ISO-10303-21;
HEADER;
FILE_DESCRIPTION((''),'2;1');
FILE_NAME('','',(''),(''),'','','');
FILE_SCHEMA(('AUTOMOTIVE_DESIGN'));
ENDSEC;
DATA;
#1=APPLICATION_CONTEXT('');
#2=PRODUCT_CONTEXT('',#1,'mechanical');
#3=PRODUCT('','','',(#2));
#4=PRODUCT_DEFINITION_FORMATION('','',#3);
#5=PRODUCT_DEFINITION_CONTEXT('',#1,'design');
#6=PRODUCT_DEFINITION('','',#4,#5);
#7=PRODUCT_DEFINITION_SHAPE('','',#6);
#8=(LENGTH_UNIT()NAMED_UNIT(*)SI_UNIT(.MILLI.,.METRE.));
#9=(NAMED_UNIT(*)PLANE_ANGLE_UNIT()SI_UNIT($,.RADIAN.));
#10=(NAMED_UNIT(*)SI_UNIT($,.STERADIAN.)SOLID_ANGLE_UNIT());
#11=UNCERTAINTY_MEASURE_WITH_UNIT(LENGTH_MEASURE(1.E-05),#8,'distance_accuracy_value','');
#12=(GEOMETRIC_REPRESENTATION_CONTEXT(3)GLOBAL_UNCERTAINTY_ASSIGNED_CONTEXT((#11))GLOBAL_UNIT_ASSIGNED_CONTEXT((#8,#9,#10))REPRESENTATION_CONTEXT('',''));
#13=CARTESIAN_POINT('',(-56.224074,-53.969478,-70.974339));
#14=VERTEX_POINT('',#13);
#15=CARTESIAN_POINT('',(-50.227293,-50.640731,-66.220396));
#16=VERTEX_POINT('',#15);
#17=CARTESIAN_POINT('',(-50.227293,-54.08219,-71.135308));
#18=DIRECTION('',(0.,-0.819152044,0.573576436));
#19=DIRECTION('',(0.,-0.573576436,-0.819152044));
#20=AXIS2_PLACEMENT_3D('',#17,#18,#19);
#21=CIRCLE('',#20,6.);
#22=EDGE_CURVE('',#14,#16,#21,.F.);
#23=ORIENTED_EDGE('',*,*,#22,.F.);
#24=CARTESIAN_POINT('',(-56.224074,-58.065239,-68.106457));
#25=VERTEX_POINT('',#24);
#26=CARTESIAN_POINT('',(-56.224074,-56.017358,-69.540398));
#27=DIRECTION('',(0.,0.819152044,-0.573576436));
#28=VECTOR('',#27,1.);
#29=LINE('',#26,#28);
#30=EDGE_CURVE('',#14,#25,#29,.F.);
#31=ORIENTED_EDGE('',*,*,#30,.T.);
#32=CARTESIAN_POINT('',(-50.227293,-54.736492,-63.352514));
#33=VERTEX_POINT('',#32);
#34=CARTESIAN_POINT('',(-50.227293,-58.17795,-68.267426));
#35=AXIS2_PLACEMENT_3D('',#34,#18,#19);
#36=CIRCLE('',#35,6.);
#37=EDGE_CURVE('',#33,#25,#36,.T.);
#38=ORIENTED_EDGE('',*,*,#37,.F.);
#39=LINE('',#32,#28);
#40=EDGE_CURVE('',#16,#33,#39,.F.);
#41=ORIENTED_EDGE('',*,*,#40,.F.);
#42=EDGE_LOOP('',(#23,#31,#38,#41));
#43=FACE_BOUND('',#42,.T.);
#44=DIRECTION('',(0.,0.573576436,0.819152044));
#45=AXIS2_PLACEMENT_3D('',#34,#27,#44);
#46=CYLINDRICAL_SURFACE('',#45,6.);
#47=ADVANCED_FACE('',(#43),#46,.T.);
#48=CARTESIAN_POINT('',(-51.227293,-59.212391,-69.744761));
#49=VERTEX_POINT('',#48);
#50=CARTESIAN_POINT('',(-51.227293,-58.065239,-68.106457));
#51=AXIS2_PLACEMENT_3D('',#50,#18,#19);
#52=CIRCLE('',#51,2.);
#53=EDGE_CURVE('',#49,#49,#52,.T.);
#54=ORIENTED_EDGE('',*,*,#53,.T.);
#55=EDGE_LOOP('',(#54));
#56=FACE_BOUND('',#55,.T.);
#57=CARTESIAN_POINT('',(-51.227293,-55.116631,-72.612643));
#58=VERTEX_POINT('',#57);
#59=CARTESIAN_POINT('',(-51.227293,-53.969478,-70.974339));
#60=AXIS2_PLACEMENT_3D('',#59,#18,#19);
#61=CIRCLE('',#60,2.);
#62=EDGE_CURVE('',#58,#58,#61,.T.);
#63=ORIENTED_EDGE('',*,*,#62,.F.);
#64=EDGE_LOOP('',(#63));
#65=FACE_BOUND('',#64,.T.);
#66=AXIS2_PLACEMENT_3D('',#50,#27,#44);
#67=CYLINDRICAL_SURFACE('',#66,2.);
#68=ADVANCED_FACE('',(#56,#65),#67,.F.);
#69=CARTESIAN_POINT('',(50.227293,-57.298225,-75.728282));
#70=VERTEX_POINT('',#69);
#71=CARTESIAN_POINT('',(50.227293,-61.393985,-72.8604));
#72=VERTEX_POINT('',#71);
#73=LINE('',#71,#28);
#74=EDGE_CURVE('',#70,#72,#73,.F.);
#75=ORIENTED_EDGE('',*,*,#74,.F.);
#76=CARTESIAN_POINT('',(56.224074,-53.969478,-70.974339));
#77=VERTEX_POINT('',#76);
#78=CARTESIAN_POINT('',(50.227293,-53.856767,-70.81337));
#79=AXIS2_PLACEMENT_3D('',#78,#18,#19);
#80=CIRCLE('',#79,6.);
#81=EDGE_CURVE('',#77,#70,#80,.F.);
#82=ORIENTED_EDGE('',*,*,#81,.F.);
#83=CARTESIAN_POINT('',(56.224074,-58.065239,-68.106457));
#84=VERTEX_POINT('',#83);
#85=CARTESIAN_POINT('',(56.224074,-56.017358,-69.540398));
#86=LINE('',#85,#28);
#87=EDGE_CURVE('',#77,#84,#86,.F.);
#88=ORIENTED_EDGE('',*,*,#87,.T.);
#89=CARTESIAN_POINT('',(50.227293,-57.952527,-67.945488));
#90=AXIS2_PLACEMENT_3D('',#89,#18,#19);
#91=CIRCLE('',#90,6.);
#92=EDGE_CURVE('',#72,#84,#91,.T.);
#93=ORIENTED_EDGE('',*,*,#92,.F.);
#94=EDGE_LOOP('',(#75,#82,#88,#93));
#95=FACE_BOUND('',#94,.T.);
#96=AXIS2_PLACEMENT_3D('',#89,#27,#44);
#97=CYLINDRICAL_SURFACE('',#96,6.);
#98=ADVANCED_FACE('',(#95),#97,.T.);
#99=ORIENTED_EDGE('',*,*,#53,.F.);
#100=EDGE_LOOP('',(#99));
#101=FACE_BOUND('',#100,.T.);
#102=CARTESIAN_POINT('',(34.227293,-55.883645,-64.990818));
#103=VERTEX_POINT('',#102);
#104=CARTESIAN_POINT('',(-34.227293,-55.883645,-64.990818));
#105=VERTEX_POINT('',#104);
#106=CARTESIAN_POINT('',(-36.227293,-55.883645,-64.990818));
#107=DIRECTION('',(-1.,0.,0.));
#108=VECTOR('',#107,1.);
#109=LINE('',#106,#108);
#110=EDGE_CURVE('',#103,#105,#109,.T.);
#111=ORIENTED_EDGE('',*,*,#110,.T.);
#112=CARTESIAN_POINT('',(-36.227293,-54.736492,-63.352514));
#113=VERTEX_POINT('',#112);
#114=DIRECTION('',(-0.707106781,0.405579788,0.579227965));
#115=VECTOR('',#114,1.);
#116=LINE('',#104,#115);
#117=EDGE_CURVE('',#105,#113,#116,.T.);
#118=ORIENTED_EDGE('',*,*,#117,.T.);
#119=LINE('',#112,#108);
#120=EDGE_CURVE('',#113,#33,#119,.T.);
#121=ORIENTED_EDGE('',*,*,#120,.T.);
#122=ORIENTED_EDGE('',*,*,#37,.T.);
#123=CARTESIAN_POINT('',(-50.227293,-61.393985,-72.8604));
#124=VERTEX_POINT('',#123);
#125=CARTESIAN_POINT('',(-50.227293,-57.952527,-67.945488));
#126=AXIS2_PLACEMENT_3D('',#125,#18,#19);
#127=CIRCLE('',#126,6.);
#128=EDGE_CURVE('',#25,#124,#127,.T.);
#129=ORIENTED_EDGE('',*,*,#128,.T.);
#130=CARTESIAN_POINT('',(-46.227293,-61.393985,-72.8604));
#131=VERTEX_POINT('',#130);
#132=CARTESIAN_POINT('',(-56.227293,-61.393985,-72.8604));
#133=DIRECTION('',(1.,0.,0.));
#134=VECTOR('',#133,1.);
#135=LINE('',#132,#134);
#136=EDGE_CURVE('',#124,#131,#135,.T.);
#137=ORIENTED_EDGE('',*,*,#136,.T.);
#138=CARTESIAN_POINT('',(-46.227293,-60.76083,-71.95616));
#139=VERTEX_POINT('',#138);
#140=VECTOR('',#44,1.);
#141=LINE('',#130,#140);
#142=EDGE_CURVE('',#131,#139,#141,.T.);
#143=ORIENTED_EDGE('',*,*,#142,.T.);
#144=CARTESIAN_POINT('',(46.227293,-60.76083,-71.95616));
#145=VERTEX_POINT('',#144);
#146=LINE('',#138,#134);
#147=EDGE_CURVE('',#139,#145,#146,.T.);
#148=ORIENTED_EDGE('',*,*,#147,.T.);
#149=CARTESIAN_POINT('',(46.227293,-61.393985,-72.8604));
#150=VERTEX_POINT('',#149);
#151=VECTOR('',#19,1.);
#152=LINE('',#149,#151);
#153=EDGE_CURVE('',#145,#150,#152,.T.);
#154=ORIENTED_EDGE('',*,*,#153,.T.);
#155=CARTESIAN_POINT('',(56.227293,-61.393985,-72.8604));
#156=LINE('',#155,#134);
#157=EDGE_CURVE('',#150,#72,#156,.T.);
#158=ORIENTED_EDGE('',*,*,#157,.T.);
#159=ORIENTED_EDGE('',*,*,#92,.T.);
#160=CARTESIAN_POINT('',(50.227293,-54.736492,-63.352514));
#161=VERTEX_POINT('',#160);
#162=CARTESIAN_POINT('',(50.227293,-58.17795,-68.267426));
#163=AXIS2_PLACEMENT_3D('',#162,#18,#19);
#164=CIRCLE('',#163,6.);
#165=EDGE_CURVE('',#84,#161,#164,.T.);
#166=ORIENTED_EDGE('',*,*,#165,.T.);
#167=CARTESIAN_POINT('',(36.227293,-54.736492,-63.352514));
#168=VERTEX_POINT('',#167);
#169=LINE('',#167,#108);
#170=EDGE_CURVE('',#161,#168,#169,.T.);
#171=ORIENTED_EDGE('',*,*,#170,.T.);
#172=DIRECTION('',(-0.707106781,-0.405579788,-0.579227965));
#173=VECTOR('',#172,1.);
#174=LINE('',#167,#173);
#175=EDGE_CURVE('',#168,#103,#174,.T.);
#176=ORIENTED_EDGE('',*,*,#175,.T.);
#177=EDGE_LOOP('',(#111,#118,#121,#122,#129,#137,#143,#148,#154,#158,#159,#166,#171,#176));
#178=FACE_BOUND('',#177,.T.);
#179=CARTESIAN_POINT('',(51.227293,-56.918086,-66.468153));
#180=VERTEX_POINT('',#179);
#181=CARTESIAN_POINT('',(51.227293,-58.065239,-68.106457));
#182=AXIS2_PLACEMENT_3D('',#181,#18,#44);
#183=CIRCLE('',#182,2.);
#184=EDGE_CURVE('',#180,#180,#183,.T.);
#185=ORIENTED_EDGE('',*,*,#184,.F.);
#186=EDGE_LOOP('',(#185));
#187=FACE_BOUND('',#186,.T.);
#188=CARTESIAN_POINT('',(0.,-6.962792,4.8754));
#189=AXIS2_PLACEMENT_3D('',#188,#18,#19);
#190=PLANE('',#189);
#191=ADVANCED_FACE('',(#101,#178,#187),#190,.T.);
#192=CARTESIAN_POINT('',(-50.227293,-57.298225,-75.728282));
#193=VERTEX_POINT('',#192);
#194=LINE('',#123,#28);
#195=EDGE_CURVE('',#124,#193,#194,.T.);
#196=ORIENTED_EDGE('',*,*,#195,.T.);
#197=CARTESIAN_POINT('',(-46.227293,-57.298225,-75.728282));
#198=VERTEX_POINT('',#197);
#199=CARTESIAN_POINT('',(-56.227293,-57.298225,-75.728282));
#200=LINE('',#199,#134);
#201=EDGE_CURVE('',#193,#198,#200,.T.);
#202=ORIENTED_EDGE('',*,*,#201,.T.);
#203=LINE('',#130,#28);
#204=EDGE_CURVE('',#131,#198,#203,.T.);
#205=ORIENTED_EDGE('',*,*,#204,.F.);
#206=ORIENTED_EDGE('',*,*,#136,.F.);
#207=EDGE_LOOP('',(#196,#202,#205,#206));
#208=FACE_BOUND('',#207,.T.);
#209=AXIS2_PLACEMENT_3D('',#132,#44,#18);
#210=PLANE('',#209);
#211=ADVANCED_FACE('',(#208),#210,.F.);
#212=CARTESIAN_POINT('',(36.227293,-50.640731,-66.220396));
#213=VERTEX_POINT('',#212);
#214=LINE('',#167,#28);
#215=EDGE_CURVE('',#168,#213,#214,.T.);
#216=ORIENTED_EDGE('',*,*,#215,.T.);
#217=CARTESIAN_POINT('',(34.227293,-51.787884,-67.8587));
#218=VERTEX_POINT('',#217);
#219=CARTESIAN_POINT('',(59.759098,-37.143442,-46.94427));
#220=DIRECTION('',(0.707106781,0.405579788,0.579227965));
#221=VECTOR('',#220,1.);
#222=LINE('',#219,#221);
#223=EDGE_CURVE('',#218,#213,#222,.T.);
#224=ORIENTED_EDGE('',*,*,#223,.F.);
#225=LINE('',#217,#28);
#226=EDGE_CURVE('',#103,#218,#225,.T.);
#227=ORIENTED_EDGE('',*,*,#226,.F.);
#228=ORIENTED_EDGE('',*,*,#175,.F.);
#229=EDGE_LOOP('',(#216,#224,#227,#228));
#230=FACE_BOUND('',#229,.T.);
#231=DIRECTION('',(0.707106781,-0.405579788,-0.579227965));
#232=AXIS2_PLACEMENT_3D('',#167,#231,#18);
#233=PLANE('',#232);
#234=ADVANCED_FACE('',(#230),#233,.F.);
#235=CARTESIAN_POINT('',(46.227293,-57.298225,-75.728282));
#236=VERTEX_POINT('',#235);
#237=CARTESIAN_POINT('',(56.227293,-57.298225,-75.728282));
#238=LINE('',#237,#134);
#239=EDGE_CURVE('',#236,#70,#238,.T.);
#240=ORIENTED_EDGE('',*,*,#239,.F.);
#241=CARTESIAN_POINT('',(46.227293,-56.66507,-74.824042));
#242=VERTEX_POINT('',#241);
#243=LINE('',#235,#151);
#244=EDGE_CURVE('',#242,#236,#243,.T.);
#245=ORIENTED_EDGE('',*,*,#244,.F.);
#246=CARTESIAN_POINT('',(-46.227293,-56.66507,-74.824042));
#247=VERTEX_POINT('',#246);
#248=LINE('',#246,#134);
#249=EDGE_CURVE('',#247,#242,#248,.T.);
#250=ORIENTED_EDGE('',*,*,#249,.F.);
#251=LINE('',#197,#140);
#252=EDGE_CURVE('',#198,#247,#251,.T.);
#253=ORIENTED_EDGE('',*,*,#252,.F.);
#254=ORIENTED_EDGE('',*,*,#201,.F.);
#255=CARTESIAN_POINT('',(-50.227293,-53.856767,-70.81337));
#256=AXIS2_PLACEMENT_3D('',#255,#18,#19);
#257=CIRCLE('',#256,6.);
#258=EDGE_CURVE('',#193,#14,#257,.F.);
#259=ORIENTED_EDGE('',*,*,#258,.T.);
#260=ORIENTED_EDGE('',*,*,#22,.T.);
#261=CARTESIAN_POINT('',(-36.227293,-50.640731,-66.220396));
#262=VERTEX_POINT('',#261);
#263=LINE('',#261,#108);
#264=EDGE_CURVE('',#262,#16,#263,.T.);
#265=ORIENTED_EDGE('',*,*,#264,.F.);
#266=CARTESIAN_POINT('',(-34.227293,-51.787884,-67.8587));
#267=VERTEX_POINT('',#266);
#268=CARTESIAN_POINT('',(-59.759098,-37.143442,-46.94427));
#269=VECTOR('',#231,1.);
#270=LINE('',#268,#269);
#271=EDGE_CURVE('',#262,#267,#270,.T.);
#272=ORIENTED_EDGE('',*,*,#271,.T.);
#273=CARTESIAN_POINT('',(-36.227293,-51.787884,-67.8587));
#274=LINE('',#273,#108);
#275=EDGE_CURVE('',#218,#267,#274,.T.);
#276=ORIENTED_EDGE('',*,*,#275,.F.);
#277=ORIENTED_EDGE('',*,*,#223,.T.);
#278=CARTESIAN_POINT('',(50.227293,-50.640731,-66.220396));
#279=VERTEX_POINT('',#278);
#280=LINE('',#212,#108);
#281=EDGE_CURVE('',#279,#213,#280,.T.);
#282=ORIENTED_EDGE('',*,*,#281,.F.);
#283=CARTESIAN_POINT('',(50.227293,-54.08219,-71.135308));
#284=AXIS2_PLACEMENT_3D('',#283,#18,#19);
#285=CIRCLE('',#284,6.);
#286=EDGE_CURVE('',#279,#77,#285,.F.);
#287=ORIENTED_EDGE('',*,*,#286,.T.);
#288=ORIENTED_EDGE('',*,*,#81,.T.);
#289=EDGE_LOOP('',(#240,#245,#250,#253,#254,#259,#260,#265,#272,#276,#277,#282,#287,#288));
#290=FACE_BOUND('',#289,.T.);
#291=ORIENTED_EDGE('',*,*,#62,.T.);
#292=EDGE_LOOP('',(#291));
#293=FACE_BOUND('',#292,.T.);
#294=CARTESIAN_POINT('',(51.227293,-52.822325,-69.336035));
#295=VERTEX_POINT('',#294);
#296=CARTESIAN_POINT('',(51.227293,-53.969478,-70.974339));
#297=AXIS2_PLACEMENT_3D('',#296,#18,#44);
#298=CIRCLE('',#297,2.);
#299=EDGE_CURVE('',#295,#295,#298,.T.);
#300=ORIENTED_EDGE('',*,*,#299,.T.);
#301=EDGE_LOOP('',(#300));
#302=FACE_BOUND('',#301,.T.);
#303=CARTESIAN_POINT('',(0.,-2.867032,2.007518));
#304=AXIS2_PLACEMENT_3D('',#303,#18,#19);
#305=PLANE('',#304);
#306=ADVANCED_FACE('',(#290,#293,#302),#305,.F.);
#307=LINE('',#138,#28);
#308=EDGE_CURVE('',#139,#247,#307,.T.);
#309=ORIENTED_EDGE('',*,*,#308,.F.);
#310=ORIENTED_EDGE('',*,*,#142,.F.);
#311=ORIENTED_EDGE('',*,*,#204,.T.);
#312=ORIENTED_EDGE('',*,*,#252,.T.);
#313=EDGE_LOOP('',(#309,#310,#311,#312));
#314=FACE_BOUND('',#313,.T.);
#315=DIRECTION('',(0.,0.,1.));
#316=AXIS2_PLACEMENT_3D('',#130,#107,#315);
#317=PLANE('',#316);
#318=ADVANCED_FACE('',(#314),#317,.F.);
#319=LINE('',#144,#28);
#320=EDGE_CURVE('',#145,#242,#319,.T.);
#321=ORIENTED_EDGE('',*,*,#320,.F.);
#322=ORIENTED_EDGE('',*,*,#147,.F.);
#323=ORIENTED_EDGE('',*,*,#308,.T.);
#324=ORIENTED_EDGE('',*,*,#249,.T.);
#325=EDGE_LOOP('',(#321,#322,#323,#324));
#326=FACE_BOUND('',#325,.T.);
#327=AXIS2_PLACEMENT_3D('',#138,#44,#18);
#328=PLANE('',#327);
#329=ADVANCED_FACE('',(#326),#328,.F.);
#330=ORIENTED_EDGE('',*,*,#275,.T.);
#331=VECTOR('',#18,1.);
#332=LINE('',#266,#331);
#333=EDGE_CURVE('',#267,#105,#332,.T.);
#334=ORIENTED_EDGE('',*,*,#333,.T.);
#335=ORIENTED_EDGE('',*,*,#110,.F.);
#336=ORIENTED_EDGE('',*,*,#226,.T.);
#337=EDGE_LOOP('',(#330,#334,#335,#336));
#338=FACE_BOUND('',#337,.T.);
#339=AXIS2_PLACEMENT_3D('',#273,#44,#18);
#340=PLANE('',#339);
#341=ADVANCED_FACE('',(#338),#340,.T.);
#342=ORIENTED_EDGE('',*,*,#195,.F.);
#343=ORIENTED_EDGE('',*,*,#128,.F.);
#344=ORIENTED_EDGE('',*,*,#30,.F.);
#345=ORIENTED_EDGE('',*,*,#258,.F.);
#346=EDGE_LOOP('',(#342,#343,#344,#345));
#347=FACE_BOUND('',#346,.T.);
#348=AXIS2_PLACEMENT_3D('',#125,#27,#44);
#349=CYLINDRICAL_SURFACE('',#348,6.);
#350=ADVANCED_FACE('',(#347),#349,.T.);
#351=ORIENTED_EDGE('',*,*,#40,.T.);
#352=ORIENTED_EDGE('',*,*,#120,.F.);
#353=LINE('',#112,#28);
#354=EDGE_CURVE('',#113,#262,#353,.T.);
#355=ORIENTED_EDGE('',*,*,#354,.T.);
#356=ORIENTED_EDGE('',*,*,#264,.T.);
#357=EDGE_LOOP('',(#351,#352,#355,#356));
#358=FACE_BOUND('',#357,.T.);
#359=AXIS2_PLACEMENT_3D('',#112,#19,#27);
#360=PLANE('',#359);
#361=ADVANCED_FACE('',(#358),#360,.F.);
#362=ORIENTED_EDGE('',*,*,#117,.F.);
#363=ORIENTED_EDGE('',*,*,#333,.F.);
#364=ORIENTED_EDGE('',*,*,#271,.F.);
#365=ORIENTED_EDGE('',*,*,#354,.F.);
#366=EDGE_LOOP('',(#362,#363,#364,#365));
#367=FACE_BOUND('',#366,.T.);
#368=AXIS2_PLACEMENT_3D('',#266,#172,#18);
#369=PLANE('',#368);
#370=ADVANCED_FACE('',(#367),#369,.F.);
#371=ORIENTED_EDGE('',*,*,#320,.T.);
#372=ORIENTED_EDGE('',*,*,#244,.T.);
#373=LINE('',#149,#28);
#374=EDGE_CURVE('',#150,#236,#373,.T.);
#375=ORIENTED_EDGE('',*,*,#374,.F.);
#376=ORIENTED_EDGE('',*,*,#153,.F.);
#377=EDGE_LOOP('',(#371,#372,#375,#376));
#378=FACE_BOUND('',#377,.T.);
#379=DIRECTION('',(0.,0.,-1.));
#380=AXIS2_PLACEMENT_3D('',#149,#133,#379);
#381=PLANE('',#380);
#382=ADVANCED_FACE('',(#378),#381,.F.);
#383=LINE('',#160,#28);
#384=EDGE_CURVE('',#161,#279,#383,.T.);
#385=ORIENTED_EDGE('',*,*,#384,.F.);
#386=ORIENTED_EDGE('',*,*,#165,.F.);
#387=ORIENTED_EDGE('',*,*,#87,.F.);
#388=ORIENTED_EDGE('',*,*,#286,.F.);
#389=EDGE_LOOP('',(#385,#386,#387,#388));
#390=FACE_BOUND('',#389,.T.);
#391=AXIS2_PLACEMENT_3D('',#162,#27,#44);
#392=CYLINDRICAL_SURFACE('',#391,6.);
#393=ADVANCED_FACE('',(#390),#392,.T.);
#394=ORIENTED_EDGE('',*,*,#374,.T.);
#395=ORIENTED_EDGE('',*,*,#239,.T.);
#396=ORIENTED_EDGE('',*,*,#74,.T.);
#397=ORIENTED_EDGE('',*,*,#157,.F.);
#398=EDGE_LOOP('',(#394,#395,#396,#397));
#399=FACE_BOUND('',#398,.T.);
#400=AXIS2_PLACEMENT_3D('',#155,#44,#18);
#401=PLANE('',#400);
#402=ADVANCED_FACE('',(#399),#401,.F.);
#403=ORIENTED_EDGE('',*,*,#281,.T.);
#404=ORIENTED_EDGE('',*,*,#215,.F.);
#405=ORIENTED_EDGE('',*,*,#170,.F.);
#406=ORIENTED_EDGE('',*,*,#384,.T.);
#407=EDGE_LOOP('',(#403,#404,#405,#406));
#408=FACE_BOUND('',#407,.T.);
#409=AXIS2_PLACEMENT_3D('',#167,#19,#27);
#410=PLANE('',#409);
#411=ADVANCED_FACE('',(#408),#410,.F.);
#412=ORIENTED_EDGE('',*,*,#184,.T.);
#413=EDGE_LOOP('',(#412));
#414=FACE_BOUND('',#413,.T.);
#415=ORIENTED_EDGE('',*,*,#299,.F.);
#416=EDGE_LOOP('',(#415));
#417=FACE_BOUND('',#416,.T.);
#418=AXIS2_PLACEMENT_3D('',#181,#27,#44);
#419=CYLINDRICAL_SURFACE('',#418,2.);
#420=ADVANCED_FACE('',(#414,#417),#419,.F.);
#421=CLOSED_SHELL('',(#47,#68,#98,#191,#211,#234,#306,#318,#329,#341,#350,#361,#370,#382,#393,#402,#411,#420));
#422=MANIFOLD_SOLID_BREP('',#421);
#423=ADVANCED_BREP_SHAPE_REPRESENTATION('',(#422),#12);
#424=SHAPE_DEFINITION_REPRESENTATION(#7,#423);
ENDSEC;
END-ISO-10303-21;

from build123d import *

# Parameters (mm, degrees)
SKETCH1_R             = 2
BOSS_EXTRUDE1_DEPTH   = 5
BOSS_EXTRUDE1_2_DEPTH = 5
SKETCH2_W             = 72.454585158
SKETCH2_H             = 8.503113073
BOSS_EXTRUDE2_DEPTH   = 5
CHAMFER1_SIZE         = 2
FILLET1_R             = 6


# Some blends are built 0.0001 mm under size
with BuildPart() as part:
    # Sketch1 → Boss-Extrude1 (new body)
    with BuildSketch(Plane(origin=(0, -2.867032155, 2.007517527), x_dir=(1, 0, 0), z_dir=(0, -0.8191520442889961, 0.5735764363510402))):
        Polygon((-56.227292579, -83.290902945), (-56.227292579, -94.897888962), (-46.227292579, -94.897888962), (-46.227292579, -93.794016018), (-36.227292579, -93.794016018), (-36.227292579, -83.290902945), align=None)
        with Locations(Location((-51.227292579, -89.094395953, 0), (0, 0, 270))):
            Circle(SKETCH1_R, mode=Mode.SUBTRACT)
    extrude(amount=BOSS_EXTRUDE1_DEPTH)



with BuildPart() as body_2:
    # Sketch1 → Boss-Extrude1 2 (new body)
    with BuildSketch(Plane(origin=(0, -2.867032155, 2.007517527), x_dir=(1, 0, 0), z_dir=(0, -0.8191520442889961, 0.5735764363510402))):
        Polygon((36.227292579, -83.290902945), (56.227292579, -83.290902945), (56.227292579, -94.897888962), (46.227292579, -94.897888962), (46.227292579, -93.794016018), (36.227292579, -93.794016018), align=None)
        with Locations(Location((51.227292579, -89.094395953, 0), (0, 0, 90))):
            Circle(SKETCH1_R, mode=Mode.SUBTRACT)
    extrude(amount=BOSS_EXTRUDE1_2_DEPTH)


with BuildPart() as part_1:
    add(part.part)

    add(body_2.part)  # Boss-Extrude2 merges body 2
    # Sketch2 → Boss-Extrude2 (add)
    with BuildSketch(Plane(origin=(0, -6.962792376, 4.875399709), x_dir=(1, 0, 0), z_dir=(0, -0.8191520442889959, 0.5735764363510404))):
        with Locations((0, -89.542459482)):
            Rectangle(SKETCH2_W, SKETCH2_H)
    extrude(amount=-BOSS_EXTRUDE2_DEPTH)

    # Chamfer1
    chamfer1_edges = [part_1.edges().sort_by_distance(p)[0] for p in [
        (36.227292579, -53.83576443, -66.424758888),
        (-36.227292579, -53.83576443, -66.424758888),
    ]]
    chamfer(chamfer1_edges, length=CHAMFER1_SIZE - 0.0001)  # a hair under: the kernel refuses the full size

    # Fillet1
    # the kernel refuses this fillet: 6 mm, written as the material it takes off along each edge
    with BuildSketch(Plane(origin=(56.227292579, -45.010944459, -84.33192876), x_dir=(1.184237892933516e-15, 0.5735764363510399, 0.819152044288996), z_dir=(0, -0.819152044288996, 0.57357643635104)), Plane(origin=(56.227292579, -38.353450782, -74.824042436), x_dir=(-1, 0, 0), z_dir=(0, -0.819152044288996, 0.57357643635104))) as fillet1_piece_1:
        with BuildLine():
            CenterArc((FILLET1_R, FILLET1_R), FILLET1_R, 180, 90)
            Line((0, FILLET1_R), (0, 0))
            Line((0, 0), (FILLET1_R, 0))
        make_face()
    extrude(amount=35, mode=Mode.SUBTRACT)
    with BuildSketch(Plane(origin=(-56.227292579, -38.353450782, -74.824042436), x_dir=(1, 0, 0), z_dir=(0, -0.819152044288996, 0.57357643635104)), Plane(origin=(-56.227292579, -45.010944459, -84.33192876), x_dir=(0, 0.57357643635104, 0.819152044288996), z_dir=(0, -0.819152044288996, 0.57357643635104))) as fillet1_piece_2:
        with BuildLine():
            CenterArc((FILLET1_R, -FILLET1_R), FILLET1_R, 90, 90)
            Line((0, -FILLET1_R), (0, 0))
            Line((0, 0), (FILLET1_R, 0))
        make_face()
    extrude(amount=35, mode=Mode.SUBTRACT)


solid = part_1.part
